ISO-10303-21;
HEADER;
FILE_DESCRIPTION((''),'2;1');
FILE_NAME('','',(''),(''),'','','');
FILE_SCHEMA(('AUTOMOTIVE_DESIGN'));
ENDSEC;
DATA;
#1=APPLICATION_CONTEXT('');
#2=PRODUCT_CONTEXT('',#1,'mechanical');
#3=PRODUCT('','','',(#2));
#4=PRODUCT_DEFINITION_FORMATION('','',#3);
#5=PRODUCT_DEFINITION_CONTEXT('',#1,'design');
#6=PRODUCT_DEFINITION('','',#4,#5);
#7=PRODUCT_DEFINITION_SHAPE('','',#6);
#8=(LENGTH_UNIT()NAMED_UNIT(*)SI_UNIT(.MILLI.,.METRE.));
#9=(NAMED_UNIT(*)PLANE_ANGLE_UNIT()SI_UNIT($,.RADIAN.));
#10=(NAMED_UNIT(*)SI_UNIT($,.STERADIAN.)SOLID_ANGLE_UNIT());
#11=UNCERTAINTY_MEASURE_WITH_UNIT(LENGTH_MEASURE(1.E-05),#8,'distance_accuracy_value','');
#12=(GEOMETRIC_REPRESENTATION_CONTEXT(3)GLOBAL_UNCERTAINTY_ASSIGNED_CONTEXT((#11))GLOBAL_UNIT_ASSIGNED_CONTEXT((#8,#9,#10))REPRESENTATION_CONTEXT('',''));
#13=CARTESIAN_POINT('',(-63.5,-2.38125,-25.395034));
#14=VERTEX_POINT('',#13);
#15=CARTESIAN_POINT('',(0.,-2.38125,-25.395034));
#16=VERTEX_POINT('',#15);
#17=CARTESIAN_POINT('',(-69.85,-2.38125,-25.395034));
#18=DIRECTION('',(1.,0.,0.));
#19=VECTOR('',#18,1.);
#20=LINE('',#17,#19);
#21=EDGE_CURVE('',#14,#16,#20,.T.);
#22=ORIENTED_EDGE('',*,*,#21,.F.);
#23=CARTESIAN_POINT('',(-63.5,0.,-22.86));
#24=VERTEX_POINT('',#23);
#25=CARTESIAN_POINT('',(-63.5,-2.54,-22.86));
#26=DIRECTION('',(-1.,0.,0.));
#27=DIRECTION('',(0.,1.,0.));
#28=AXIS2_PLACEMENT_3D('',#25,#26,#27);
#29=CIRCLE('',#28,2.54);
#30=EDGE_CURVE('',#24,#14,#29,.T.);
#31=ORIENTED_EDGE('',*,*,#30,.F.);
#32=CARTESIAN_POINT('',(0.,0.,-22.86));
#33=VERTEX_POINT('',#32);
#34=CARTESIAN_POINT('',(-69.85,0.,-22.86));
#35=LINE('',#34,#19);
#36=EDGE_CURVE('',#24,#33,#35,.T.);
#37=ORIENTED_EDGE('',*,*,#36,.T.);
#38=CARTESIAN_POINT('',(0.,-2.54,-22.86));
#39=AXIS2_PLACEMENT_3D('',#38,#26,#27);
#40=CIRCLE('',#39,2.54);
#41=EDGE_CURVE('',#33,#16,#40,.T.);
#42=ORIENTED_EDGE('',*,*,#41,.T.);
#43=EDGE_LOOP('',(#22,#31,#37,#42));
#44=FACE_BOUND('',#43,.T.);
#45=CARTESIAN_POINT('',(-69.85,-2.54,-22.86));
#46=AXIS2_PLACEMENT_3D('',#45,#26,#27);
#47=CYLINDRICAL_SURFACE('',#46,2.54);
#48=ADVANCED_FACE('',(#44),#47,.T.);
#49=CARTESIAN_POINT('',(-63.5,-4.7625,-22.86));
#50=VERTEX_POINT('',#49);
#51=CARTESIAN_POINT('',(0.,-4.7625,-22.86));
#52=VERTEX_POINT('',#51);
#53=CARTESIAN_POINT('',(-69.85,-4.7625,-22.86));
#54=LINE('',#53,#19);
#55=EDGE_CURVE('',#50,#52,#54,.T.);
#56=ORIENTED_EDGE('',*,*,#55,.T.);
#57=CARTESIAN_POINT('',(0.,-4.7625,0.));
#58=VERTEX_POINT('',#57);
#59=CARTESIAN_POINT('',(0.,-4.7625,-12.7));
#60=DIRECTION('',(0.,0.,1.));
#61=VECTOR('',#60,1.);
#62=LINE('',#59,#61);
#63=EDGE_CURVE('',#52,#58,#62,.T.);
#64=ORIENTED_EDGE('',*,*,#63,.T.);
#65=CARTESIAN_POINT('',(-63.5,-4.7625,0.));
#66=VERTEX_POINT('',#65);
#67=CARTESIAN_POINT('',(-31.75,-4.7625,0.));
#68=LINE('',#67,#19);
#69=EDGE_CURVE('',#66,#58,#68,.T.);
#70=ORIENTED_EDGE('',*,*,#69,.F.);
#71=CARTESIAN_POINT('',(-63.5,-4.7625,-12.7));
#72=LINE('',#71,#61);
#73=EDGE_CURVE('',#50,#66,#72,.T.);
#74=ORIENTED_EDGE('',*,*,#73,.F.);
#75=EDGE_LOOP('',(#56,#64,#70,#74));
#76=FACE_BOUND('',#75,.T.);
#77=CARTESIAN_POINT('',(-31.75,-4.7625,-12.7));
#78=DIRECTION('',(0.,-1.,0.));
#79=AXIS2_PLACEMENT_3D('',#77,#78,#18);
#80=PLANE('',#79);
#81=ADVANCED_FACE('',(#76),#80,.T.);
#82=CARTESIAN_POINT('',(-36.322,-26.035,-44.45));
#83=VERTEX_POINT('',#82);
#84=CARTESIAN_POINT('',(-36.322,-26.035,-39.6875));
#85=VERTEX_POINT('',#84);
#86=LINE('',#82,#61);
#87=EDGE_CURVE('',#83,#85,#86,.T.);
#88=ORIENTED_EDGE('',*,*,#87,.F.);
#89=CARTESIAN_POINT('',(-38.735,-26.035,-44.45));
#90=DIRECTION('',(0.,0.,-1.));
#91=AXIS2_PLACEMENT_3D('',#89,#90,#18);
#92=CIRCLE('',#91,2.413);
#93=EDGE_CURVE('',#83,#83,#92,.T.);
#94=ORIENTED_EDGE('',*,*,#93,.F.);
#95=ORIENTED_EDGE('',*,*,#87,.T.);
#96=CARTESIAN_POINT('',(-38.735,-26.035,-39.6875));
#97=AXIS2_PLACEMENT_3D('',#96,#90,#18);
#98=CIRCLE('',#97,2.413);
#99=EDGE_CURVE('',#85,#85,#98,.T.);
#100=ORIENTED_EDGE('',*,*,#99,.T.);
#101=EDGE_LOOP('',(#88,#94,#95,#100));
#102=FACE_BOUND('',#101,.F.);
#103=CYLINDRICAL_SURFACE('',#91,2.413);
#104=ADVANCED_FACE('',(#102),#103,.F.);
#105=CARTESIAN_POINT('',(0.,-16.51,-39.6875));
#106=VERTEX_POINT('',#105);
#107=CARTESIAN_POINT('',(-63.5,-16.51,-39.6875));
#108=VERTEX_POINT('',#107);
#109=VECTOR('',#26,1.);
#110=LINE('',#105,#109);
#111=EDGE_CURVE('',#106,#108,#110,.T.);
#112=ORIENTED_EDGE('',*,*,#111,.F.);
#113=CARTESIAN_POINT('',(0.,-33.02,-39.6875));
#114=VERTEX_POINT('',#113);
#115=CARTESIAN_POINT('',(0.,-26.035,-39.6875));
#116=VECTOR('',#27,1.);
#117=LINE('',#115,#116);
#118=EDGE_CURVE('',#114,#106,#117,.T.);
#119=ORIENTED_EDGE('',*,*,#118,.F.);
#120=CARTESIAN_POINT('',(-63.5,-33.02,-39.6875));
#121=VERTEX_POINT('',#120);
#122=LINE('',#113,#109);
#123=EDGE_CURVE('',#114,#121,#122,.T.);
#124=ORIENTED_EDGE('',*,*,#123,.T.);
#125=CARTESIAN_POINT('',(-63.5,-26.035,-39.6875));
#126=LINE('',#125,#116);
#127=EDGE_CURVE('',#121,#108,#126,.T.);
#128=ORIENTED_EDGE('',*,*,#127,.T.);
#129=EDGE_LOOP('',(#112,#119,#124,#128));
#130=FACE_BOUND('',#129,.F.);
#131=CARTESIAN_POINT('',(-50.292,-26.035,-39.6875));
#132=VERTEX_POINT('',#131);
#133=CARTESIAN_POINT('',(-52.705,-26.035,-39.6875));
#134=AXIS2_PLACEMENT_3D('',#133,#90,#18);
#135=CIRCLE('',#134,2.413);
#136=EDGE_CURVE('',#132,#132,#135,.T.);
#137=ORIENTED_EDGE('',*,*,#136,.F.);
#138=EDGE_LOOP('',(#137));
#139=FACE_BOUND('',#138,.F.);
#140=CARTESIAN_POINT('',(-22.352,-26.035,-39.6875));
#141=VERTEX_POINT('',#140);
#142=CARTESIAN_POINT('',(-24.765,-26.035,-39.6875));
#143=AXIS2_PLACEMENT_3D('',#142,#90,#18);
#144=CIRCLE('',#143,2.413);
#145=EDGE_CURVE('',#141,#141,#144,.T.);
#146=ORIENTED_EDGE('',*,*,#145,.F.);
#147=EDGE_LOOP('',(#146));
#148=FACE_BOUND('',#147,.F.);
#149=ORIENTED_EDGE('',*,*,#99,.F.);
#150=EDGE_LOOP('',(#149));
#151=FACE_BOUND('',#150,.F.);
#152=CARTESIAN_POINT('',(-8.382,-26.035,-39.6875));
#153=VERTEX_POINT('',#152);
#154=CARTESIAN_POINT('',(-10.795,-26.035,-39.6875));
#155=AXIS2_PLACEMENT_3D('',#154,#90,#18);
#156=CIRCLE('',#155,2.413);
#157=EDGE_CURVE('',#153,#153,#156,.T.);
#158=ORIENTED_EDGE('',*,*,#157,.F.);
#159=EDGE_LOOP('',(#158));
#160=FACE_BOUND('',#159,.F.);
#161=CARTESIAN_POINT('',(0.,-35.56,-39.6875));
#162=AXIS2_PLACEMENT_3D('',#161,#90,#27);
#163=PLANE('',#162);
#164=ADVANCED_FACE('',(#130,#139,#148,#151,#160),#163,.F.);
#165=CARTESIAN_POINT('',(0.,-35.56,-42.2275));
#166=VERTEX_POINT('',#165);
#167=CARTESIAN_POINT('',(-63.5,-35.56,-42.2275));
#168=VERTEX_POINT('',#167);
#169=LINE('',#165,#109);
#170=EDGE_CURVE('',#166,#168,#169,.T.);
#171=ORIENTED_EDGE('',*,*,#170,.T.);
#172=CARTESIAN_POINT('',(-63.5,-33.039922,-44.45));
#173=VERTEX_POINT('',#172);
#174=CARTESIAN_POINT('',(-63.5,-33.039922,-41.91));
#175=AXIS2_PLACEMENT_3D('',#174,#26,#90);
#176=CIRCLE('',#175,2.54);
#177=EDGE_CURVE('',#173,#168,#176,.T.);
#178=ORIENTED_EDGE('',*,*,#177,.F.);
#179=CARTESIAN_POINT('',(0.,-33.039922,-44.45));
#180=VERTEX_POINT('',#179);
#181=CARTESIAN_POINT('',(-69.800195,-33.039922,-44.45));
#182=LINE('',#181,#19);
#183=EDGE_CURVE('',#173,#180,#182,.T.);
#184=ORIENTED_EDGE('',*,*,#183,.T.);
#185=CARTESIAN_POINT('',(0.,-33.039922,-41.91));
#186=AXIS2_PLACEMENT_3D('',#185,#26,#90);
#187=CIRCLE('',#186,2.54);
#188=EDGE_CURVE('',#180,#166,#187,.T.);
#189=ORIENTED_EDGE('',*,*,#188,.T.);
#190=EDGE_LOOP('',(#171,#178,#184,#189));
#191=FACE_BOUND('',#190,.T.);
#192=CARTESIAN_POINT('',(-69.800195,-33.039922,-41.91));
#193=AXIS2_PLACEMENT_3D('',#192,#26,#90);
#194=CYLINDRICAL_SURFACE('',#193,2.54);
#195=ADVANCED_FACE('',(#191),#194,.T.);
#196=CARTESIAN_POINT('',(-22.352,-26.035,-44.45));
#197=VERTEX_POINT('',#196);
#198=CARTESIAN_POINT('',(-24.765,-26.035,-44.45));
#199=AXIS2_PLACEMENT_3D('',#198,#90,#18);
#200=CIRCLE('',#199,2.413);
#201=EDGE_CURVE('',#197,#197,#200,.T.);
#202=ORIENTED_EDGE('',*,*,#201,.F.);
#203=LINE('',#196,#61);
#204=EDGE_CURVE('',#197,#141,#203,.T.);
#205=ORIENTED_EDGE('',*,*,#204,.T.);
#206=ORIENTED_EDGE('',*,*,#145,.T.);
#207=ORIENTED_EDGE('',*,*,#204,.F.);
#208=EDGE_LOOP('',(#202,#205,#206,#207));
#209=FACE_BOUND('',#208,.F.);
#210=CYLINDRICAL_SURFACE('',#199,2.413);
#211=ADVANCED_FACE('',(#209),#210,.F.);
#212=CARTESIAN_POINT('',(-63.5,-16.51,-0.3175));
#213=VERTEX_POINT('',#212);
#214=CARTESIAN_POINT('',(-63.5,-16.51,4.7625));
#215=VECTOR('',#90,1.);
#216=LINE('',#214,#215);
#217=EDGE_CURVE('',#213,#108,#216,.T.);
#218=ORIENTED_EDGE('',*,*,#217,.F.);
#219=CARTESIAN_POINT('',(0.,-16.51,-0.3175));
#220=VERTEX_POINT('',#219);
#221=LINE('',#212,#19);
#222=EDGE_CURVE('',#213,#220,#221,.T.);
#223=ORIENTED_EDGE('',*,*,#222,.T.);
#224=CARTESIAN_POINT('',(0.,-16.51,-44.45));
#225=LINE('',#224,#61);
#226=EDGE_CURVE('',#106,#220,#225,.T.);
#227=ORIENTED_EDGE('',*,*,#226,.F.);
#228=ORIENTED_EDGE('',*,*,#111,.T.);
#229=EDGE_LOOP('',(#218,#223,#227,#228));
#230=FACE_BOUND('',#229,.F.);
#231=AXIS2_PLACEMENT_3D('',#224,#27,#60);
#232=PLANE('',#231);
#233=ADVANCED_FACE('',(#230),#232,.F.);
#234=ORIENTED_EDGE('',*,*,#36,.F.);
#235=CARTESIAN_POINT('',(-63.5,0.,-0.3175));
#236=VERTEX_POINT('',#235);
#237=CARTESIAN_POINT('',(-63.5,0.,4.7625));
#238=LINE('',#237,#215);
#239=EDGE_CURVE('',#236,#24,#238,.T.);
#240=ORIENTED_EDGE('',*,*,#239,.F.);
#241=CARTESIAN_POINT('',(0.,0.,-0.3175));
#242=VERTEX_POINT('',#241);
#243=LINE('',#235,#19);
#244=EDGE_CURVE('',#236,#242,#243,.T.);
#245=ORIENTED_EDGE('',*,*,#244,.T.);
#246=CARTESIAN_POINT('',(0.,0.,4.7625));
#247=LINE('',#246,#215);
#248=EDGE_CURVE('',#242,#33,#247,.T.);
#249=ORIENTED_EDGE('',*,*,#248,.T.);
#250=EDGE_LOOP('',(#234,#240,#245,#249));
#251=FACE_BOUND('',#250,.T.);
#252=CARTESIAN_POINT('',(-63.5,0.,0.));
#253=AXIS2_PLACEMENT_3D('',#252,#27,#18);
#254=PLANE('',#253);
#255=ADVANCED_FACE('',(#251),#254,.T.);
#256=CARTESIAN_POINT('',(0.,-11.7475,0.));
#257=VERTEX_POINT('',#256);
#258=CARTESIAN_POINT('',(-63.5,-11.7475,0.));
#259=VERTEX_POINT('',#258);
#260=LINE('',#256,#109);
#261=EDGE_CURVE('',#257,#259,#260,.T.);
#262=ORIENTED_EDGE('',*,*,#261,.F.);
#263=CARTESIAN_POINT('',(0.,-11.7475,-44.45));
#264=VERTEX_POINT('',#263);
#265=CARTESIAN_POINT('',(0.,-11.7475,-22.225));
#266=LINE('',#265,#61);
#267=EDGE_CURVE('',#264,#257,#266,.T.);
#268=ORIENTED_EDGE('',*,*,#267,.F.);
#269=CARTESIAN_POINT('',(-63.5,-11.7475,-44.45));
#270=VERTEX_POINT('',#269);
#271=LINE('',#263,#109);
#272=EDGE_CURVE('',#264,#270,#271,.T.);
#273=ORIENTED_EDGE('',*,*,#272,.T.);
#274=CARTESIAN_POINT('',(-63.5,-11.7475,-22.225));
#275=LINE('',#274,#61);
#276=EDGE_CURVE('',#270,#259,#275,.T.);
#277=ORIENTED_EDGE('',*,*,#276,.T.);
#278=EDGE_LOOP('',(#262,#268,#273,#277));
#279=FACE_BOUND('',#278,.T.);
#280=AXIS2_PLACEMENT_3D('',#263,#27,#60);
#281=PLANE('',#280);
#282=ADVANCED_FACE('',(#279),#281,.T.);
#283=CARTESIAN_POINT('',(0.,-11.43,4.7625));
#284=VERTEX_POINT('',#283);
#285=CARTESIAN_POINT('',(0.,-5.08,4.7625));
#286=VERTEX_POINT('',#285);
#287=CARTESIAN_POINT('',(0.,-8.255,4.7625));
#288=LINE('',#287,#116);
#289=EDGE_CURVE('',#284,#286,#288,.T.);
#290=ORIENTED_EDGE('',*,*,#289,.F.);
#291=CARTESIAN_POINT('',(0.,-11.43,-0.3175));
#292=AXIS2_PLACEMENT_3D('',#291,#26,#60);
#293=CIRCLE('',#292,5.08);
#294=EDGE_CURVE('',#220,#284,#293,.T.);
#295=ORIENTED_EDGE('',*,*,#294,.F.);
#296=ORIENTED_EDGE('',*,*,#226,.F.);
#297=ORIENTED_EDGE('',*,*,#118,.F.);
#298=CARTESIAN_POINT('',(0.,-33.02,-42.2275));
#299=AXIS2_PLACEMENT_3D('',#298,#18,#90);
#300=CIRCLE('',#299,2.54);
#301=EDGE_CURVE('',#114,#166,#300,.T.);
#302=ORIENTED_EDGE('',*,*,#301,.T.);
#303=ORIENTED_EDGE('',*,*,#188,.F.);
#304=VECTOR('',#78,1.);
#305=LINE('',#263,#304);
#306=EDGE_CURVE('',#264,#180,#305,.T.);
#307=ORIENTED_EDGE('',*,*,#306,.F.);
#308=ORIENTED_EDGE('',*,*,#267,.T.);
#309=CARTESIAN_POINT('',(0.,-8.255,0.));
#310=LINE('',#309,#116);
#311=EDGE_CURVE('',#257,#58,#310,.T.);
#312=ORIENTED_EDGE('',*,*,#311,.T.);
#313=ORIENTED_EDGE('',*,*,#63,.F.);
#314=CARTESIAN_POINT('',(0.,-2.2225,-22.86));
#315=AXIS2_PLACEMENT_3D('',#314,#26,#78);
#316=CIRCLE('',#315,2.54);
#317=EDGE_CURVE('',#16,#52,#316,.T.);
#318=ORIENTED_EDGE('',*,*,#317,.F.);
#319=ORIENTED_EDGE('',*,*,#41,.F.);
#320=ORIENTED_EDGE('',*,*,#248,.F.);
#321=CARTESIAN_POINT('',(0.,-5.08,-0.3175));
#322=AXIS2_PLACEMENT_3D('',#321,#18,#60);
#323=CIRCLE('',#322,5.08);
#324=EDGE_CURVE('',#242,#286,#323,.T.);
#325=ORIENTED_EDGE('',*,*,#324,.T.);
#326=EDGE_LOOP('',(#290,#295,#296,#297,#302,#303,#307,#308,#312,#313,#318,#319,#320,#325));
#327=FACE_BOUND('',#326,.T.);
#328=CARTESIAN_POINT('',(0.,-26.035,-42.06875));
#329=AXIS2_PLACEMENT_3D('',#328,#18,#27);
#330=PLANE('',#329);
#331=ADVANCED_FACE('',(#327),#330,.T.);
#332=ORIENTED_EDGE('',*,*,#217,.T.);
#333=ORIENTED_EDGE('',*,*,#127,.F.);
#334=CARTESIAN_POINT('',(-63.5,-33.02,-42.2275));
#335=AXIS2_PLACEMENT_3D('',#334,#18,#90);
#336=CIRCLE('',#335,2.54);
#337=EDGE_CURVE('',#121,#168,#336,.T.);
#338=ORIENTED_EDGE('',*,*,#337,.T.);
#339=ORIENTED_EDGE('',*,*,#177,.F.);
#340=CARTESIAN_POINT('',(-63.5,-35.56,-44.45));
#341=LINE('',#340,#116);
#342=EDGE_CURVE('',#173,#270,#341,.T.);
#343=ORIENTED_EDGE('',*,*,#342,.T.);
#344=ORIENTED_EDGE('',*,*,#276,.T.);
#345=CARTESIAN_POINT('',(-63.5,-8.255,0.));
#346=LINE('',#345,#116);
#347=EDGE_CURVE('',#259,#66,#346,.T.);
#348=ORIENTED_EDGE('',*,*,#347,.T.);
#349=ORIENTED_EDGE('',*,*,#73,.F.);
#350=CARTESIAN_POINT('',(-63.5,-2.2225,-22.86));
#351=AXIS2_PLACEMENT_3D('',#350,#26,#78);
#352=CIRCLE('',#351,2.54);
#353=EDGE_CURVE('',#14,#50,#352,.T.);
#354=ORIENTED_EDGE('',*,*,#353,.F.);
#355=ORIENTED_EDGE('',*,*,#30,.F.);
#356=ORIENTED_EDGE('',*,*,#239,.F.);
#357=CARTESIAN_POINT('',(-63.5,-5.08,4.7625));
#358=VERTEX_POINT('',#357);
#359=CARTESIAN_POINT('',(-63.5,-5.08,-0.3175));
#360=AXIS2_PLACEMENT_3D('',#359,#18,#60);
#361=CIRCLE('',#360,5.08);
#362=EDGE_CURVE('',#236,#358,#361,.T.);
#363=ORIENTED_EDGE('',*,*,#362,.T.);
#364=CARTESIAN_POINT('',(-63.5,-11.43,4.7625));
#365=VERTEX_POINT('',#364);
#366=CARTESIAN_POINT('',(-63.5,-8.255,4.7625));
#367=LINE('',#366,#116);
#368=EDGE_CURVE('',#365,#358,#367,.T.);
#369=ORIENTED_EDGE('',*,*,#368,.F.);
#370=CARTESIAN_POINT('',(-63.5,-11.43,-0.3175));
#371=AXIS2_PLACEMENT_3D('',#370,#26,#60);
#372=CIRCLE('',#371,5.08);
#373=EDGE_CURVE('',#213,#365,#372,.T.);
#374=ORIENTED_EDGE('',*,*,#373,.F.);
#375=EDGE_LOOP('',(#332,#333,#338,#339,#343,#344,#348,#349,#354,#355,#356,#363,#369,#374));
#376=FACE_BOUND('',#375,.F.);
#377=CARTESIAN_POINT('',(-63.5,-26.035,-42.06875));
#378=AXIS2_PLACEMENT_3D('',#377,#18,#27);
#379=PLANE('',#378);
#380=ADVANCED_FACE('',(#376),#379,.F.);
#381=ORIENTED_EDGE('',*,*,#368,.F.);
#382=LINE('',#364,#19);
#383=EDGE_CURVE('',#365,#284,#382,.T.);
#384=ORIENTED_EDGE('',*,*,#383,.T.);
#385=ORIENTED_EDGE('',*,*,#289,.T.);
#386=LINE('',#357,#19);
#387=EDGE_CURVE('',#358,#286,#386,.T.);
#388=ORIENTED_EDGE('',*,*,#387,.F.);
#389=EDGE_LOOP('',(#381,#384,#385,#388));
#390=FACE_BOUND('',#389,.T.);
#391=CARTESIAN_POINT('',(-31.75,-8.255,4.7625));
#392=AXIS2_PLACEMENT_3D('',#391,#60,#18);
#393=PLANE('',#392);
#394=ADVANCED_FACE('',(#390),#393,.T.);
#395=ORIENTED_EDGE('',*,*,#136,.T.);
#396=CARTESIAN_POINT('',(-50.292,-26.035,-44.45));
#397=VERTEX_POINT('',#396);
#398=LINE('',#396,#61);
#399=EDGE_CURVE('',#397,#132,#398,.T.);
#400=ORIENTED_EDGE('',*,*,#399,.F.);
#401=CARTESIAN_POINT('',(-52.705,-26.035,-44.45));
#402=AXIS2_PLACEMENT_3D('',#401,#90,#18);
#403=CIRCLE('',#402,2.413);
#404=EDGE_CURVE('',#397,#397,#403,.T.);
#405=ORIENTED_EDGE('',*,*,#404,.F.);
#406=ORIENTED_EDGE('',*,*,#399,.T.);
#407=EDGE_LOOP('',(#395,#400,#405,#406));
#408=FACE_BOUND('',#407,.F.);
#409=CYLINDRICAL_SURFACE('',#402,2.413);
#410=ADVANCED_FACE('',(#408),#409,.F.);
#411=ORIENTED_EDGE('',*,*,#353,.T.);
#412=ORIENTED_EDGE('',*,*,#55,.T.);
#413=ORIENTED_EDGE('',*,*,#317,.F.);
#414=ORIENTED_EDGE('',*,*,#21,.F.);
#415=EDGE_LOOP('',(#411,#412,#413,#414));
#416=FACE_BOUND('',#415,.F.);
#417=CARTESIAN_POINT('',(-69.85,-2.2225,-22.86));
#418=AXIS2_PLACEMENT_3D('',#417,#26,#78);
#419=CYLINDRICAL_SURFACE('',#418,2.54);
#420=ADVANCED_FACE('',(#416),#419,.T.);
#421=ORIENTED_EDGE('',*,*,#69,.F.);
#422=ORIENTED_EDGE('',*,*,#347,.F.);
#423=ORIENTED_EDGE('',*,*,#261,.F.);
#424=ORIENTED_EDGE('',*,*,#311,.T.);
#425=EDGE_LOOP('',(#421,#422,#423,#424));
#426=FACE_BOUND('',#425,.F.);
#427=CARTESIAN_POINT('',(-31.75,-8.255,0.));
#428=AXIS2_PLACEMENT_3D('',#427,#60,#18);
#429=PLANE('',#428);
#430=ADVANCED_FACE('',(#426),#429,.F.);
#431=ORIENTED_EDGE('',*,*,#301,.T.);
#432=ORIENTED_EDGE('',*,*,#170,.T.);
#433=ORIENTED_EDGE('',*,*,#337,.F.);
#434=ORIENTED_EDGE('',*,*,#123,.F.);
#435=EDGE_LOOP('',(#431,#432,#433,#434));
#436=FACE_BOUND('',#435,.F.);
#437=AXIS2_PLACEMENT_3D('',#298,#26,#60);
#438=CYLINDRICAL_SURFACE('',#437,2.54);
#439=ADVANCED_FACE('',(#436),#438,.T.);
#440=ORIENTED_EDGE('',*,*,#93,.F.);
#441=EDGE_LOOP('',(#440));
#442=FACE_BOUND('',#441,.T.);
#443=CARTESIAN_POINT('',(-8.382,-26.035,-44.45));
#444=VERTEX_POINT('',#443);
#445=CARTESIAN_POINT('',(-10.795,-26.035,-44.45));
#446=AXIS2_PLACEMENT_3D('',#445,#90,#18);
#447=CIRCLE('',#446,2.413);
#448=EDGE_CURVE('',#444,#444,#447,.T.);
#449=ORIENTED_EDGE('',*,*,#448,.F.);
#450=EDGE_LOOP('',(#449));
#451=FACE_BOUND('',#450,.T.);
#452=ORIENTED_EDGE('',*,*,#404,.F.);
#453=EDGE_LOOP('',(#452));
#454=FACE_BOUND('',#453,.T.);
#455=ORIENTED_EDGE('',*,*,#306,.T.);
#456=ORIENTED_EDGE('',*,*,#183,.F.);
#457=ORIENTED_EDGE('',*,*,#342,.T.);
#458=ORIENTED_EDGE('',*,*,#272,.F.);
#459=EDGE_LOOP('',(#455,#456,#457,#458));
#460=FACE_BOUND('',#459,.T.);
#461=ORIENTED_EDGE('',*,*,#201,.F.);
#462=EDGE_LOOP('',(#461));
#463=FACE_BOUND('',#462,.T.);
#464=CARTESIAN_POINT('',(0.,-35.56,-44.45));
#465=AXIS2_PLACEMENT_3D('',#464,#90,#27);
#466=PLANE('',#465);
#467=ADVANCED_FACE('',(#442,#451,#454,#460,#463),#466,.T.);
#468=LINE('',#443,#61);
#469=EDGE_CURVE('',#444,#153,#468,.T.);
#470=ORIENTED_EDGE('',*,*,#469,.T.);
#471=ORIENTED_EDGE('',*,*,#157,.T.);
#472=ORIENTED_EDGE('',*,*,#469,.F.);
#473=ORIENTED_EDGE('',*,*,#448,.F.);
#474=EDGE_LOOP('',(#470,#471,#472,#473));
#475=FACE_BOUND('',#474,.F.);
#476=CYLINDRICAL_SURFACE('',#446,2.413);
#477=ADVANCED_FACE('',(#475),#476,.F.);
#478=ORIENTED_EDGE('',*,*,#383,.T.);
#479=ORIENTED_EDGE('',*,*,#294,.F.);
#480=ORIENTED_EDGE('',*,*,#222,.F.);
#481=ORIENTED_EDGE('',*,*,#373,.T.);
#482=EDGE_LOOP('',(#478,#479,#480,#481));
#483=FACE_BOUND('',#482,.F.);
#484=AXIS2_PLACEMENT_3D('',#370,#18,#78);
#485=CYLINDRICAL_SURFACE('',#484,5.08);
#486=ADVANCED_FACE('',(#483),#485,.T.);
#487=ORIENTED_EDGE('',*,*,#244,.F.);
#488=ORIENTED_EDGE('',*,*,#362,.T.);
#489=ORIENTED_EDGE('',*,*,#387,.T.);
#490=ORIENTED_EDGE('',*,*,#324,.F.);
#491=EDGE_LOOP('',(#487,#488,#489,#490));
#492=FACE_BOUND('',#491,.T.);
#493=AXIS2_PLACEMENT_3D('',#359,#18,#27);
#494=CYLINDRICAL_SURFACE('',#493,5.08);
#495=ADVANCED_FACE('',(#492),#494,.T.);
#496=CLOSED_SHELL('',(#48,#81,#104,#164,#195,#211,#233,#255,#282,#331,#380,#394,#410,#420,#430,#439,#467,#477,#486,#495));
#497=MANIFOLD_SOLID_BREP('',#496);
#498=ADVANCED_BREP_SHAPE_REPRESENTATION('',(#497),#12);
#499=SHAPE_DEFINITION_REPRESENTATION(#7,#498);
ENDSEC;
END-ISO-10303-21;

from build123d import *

# Parameters (mm, degrees)
F0_W         = 63.5
F0_H         = 25.4
F1_DEPTH     = 4.7625
F2_W         = 63.5
F2_H         = 16.51
F3_DEPTH     = 4.7625
F4_W         = 4.7625
F4_H         = 44.45
F5_DEPTH     = 63.5
F6_W         = 19.05
F6_H         = 4.7625
F7_DEPTH     = 63.5
F8_R         = 2.413
F9_DEPTH     = 4.7625
F10_R        = 5.08
F11_R        = 2.54
F12_T1_DEPTH = 76.2
F13_T1_DEPTH = 76.1003906189


# Not quite as in the source:
# - a fillet or chamfer that OpenCascade refuses, or shapes differently, is made with other operations: its cross-section is extruded or revolved along the edge and cut away or added


with BuildPart() as f1:
    # F0 (on Front) → F1 (new body)
    with BuildSketch(Plane.XZ):
        with Locations((-31.75, -12.7)):
            Rectangle(F0_W, F0_H)
    extrude(amount=F1_DEPTH)

    # F2 (on Top) → F3 (join)
    with BuildSketch(Plane.XY):
        with Locations((-31.75, -8.255)):
            Rectangle(F2_W, F2_H)
    extrude(amount=F3_DEPTH)

    # F4 (on Right) → F5 (join)
    with BuildSketch(Plane.YZ):
        with Locations((-14.12875, -22.225)):
            Rectangle(F4_W, F4_H)
    extrude(amount=-F5_DEPTH)

    # F6 (on Right) → F7 (join)
    with BuildSketch(Plane.YZ):
        with Locations((-26.035, -42.06875)):
            Rectangle(F6_W, F6_H)
    extrude(amount=-F7_DEPTH)

    # F8 (on face) → F9 (cut)
    with BuildSketch(Plane(origin=(0, 0, -44.45), x_dir=(1, 0, 0), z_dir=(0, 0, -1))):
        with Locations((-52.705, 26.035)):
            Circle(F8_R)
        with Locations((-38.735, 26.035)):
            Circle(F8_R)
        with Locations((-24.765, 26.035)):
            Circle(F8_R)
        with Locations((-10.795, 26.035)):
            Circle(F8_R)
    extrude(amount=-F9_DEPTH, mode=Mode.SUBTRACT)

    # F10
    f10_edges = [f1.edges().sort_by_distance(p)[0] for p in [
        (-31.75, 0, 4.7625),
        (-31.75, -16.51, 4.7625),
    ]]
    fillet(f10_edges, radius=F10_R)

    # F11
    f11_edges = [f1.edges().sort_by_distance(p)[0] for p in [
        (-31.75, -35.56, -39.6875),
    ]]
    fillet(f11_edges, radius=F11_R)

    # F12: fillet of radius 2.54 on 2 edges, made by hand

    # F12_s2 → F12_t1 (cut)
    with BuildSketch(Plane.YZ.offset(-69.85)):
        with BuildLine():
            ThreePointArc((-4.7625, -22.86), (-4.0185512242, -24.6560512242), (-2.2225, -25.4))
            Line((-2.2225, -25.4), (-4.7625, -25.4))
            Line((-4.7625, -25.4), (-4.7625, -22.86))
        make_face()
        with BuildLine():
            ThreePointArc((0, -22.86), (-0.7439487758, -24.6560512242), (-2.54, -25.4))
            Line((-2.54, -25.4), (0, -25.4))
            Line((0, -25.4), (0, -22.86))
        make_face()
    extrude(amount=F12_T1_DEPTH, mode=Mode.SUBTRACT)

    # F13: fillet of radius 2.54 on 1 edges, made by hand

    # F13_s2 → F13_t1 (cut)
    with BuildSketch(Plane.YZ.offset(-69.8001953095)):
        with BuildLine():
            ThreePointArc((-33.0399218762, -44.45), (-34.7199739587, -43.815), (-35.56, -42.2275))
            Line((-35.56, -42.2275), (-35.56, -44.45))
            Line((-35.56, -44.45), (-33.0399218762, -44.45))
        make_face()
    extrude(amount=F13_T1_DEPTH, mode=Mode.SUBTRACT)


solid = f1.part
